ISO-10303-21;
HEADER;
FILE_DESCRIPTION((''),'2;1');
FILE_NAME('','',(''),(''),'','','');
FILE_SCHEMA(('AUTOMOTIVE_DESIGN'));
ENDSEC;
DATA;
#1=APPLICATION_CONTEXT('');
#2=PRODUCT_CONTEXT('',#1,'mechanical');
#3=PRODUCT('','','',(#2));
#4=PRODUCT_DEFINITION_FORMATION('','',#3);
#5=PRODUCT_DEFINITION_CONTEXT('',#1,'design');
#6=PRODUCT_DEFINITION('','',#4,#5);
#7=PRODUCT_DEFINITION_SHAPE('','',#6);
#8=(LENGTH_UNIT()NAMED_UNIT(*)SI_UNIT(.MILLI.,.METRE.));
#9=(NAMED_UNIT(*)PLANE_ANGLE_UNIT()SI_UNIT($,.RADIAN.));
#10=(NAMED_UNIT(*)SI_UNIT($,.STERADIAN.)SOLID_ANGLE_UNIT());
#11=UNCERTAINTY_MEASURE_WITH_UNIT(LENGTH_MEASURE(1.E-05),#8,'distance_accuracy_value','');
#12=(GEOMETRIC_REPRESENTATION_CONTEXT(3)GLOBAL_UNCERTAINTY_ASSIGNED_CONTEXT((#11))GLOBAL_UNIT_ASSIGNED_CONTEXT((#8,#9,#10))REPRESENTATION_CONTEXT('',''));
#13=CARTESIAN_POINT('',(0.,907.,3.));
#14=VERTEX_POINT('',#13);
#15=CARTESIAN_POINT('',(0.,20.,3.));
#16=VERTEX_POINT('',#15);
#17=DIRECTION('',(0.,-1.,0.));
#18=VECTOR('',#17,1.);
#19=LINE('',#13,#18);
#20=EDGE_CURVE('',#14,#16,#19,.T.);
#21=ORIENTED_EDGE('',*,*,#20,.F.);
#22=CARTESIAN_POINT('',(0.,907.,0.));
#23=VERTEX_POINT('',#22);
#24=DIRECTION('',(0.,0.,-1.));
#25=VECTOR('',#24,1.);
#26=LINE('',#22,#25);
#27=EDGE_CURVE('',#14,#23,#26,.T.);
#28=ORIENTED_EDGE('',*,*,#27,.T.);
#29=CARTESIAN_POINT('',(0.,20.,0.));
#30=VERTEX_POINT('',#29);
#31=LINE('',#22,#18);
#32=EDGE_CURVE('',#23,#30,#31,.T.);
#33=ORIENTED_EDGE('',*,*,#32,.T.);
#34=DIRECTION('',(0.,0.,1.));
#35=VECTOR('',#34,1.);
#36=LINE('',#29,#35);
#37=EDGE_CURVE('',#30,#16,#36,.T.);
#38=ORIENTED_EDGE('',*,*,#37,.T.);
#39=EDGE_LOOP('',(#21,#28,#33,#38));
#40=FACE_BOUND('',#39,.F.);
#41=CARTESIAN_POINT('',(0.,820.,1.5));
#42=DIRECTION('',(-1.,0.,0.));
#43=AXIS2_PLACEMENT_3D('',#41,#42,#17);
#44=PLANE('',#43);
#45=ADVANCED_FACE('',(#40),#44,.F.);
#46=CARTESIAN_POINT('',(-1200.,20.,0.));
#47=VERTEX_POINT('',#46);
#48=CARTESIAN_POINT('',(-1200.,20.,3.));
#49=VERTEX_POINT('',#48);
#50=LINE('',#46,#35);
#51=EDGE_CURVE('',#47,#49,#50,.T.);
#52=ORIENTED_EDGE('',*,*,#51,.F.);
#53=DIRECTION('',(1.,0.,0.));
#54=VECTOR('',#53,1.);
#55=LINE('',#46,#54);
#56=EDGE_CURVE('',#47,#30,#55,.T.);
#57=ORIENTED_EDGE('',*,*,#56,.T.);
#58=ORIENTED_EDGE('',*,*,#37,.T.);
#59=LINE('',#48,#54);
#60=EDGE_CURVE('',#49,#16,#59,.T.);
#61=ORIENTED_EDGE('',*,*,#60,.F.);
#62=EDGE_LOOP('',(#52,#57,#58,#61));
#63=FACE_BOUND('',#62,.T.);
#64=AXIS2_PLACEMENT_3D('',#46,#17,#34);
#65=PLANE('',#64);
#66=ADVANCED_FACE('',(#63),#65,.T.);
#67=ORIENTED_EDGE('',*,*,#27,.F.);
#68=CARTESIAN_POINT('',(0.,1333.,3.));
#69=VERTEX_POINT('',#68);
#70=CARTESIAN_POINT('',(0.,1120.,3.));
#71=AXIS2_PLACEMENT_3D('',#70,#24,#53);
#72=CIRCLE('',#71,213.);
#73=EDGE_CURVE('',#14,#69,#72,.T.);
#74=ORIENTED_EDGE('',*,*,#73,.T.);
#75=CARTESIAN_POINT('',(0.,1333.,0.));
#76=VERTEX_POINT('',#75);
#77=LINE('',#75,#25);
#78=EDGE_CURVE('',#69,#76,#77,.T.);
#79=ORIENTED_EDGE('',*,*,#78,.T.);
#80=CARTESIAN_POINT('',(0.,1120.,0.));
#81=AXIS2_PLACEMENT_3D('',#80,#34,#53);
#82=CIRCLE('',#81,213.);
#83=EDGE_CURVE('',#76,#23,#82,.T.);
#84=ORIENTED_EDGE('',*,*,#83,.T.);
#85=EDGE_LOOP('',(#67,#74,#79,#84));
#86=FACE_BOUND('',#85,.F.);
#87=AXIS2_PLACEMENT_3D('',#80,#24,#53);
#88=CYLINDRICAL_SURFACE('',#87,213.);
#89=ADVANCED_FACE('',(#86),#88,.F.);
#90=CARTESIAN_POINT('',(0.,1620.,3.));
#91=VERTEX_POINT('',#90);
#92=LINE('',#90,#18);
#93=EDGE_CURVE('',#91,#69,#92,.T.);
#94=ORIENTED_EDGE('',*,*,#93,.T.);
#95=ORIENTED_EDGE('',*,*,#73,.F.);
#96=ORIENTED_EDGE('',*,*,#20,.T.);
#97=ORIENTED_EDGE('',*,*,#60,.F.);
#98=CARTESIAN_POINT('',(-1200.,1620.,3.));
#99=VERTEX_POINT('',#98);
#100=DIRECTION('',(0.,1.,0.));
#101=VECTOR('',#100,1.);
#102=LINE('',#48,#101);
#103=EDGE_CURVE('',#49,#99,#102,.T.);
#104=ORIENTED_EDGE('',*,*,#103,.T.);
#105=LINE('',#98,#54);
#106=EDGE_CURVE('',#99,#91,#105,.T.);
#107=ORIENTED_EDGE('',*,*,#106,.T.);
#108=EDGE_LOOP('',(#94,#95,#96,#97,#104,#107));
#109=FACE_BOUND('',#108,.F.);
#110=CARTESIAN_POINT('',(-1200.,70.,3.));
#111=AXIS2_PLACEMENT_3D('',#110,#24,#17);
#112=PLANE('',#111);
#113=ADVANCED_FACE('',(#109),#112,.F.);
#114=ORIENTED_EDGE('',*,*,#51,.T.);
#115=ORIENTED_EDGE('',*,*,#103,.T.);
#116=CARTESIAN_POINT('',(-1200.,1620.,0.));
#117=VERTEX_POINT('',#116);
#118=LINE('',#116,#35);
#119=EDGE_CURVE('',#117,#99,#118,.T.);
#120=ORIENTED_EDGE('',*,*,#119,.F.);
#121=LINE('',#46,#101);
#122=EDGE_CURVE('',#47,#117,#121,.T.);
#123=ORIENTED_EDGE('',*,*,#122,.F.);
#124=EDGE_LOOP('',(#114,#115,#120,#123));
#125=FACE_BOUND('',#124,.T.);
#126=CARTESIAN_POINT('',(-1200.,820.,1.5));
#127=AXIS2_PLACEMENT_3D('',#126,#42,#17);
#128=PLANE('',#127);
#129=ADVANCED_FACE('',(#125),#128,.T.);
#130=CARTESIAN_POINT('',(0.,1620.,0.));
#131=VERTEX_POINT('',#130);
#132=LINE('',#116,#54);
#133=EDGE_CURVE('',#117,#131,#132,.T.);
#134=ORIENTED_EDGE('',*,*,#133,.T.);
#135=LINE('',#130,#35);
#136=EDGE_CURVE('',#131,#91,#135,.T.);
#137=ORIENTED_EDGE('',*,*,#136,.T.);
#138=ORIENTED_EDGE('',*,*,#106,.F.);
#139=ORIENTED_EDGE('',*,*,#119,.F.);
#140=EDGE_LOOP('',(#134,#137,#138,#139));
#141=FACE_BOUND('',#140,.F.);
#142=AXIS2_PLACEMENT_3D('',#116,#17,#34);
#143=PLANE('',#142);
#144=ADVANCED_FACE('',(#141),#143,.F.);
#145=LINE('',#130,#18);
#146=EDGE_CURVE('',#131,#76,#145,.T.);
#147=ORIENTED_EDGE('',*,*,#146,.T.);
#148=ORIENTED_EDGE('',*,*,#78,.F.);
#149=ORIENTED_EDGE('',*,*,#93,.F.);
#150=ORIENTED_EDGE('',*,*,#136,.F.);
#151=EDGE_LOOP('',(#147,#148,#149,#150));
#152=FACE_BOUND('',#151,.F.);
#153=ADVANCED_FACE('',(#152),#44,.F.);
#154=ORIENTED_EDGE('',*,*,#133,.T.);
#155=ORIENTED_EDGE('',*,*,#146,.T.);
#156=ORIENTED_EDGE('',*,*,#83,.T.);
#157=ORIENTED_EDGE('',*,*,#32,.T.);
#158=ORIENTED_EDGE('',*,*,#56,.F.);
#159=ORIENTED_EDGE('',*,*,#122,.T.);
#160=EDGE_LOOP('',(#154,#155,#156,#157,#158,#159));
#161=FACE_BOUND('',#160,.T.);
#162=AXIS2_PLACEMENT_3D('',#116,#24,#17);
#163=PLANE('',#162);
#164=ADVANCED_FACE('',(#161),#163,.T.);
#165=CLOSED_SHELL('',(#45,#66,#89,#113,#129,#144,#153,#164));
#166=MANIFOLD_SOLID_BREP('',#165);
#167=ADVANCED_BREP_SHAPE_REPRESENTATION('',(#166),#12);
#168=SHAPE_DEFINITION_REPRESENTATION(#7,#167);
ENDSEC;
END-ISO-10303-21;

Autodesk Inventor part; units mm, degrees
ref_plane "YZ Plane" through (0, 0, 0) normal (1, 0, 0) x (0, 1, 0)
ref_plane "XZ Plane" through (0, 0, 0) normal (0, 1, 0) x (-1, 0, 0)
ref_plane "XY Plane" through (0, 0, 0) normal (0, 0, 1) x (1, 0, 0)
sketch "Sketch1" plane through (0, 0, 0) normal (1, 0, 0) x (0, 1, 0)
  line L0 (1620, 0) -> (70, 0)
  line L1 (70, 0) -> (20, 0)
  line L2 (20, 0) -> (0, 0)
  dimension "d0" = 180
  dimension "d1" = 50
  dimension "d2" = 1620
  dimension "d3" = 20
contour flange "Contour Flange1" sketch "Sketch1" thickness 3 bend radius 3 width 1200 along (-1, 0, 0) mid plane no both sides no wall seen from (0, 845, 0) lies toward (0, 0, 1) curves L0 L1
bend "Bend1"
corner "Corner1"
sketch "Sketch3" plane through (0, 49.7046, 0) normal (0, 0, -1) x (1, 0, 0)
  line L0 (-1197.5147, 29.7046) -> (-1197.5147, -1570.2954) construction
  line L1 (0, 29.7046) -> (0, -1570.2954) projected
  line L2 (0, -1570.2954) -> (-1197.5147, -1570.2954) construction
  line L3 (0, -1570.2954) -> (0, 29.7046) projected
  circle A0 centre (0, -1070.2954) radius 213
  line L4 (-1200, 29.7046) -> (0, 29.7046) projected
  point P0 (0, 49.7046)
  point P1 (0, 0)
  point P2 (0, -1283.2954)
  point P3 (0, -857.2954)
  dimension "d25" = 426
  dimension "d29" = 500
extrude "Cut1" cut sketch "Sketch3" against normal blind 3
sketch "Sketch2" plane through (-1197.8787, 1620, 0.8787) normal (-0.7071068, 0, 0.7071068) x (0, -1, 0)
  line L0 (1600, 0) -> (0, 0)
  line L1 (0, 0) -> (0, -50)
  line L2 (0, -50) -> (1600, -50)
  line L3 (1600, -50) -> (1600, 0)
equation "\"d27\" = Thickness"
equation "\"d4\" = Thickness"
equation "\"d5\" = BendReliefWidth"
equation "\"d6\" = BendReliefDepth"
equation "\"d7\" = MinimumRemnant"
equation "\"d8\" = TransitionRadius"
equation "\"d10\" = BendRadius"
equation "\"d12\" = CornerReliefSize"
equation "\"d13\" = GapSize"
equation "\"d14\" = JacobiRadiusSize"
equation "\"BendRadius\" = Thickness"
equation "\"BendReliefWidth\" = Thickness"
equation "\"BendReliefDepth\" = 0.5 * Thickness"
equation "\"CornerReliefSize\" = 4 * Thickness"
equation "\"MinimumRemnant\" = 2 * Thickness"
equation "\"TransitionRadius\" = BendRadius"
equation "\"JacobiRadiusSize\" = BendRadius"
equation "\"GapSize\" = Thickness"
equation "\"Thickness\" = 3"
properties part number "GBK-RK-0018 long wall 4"
